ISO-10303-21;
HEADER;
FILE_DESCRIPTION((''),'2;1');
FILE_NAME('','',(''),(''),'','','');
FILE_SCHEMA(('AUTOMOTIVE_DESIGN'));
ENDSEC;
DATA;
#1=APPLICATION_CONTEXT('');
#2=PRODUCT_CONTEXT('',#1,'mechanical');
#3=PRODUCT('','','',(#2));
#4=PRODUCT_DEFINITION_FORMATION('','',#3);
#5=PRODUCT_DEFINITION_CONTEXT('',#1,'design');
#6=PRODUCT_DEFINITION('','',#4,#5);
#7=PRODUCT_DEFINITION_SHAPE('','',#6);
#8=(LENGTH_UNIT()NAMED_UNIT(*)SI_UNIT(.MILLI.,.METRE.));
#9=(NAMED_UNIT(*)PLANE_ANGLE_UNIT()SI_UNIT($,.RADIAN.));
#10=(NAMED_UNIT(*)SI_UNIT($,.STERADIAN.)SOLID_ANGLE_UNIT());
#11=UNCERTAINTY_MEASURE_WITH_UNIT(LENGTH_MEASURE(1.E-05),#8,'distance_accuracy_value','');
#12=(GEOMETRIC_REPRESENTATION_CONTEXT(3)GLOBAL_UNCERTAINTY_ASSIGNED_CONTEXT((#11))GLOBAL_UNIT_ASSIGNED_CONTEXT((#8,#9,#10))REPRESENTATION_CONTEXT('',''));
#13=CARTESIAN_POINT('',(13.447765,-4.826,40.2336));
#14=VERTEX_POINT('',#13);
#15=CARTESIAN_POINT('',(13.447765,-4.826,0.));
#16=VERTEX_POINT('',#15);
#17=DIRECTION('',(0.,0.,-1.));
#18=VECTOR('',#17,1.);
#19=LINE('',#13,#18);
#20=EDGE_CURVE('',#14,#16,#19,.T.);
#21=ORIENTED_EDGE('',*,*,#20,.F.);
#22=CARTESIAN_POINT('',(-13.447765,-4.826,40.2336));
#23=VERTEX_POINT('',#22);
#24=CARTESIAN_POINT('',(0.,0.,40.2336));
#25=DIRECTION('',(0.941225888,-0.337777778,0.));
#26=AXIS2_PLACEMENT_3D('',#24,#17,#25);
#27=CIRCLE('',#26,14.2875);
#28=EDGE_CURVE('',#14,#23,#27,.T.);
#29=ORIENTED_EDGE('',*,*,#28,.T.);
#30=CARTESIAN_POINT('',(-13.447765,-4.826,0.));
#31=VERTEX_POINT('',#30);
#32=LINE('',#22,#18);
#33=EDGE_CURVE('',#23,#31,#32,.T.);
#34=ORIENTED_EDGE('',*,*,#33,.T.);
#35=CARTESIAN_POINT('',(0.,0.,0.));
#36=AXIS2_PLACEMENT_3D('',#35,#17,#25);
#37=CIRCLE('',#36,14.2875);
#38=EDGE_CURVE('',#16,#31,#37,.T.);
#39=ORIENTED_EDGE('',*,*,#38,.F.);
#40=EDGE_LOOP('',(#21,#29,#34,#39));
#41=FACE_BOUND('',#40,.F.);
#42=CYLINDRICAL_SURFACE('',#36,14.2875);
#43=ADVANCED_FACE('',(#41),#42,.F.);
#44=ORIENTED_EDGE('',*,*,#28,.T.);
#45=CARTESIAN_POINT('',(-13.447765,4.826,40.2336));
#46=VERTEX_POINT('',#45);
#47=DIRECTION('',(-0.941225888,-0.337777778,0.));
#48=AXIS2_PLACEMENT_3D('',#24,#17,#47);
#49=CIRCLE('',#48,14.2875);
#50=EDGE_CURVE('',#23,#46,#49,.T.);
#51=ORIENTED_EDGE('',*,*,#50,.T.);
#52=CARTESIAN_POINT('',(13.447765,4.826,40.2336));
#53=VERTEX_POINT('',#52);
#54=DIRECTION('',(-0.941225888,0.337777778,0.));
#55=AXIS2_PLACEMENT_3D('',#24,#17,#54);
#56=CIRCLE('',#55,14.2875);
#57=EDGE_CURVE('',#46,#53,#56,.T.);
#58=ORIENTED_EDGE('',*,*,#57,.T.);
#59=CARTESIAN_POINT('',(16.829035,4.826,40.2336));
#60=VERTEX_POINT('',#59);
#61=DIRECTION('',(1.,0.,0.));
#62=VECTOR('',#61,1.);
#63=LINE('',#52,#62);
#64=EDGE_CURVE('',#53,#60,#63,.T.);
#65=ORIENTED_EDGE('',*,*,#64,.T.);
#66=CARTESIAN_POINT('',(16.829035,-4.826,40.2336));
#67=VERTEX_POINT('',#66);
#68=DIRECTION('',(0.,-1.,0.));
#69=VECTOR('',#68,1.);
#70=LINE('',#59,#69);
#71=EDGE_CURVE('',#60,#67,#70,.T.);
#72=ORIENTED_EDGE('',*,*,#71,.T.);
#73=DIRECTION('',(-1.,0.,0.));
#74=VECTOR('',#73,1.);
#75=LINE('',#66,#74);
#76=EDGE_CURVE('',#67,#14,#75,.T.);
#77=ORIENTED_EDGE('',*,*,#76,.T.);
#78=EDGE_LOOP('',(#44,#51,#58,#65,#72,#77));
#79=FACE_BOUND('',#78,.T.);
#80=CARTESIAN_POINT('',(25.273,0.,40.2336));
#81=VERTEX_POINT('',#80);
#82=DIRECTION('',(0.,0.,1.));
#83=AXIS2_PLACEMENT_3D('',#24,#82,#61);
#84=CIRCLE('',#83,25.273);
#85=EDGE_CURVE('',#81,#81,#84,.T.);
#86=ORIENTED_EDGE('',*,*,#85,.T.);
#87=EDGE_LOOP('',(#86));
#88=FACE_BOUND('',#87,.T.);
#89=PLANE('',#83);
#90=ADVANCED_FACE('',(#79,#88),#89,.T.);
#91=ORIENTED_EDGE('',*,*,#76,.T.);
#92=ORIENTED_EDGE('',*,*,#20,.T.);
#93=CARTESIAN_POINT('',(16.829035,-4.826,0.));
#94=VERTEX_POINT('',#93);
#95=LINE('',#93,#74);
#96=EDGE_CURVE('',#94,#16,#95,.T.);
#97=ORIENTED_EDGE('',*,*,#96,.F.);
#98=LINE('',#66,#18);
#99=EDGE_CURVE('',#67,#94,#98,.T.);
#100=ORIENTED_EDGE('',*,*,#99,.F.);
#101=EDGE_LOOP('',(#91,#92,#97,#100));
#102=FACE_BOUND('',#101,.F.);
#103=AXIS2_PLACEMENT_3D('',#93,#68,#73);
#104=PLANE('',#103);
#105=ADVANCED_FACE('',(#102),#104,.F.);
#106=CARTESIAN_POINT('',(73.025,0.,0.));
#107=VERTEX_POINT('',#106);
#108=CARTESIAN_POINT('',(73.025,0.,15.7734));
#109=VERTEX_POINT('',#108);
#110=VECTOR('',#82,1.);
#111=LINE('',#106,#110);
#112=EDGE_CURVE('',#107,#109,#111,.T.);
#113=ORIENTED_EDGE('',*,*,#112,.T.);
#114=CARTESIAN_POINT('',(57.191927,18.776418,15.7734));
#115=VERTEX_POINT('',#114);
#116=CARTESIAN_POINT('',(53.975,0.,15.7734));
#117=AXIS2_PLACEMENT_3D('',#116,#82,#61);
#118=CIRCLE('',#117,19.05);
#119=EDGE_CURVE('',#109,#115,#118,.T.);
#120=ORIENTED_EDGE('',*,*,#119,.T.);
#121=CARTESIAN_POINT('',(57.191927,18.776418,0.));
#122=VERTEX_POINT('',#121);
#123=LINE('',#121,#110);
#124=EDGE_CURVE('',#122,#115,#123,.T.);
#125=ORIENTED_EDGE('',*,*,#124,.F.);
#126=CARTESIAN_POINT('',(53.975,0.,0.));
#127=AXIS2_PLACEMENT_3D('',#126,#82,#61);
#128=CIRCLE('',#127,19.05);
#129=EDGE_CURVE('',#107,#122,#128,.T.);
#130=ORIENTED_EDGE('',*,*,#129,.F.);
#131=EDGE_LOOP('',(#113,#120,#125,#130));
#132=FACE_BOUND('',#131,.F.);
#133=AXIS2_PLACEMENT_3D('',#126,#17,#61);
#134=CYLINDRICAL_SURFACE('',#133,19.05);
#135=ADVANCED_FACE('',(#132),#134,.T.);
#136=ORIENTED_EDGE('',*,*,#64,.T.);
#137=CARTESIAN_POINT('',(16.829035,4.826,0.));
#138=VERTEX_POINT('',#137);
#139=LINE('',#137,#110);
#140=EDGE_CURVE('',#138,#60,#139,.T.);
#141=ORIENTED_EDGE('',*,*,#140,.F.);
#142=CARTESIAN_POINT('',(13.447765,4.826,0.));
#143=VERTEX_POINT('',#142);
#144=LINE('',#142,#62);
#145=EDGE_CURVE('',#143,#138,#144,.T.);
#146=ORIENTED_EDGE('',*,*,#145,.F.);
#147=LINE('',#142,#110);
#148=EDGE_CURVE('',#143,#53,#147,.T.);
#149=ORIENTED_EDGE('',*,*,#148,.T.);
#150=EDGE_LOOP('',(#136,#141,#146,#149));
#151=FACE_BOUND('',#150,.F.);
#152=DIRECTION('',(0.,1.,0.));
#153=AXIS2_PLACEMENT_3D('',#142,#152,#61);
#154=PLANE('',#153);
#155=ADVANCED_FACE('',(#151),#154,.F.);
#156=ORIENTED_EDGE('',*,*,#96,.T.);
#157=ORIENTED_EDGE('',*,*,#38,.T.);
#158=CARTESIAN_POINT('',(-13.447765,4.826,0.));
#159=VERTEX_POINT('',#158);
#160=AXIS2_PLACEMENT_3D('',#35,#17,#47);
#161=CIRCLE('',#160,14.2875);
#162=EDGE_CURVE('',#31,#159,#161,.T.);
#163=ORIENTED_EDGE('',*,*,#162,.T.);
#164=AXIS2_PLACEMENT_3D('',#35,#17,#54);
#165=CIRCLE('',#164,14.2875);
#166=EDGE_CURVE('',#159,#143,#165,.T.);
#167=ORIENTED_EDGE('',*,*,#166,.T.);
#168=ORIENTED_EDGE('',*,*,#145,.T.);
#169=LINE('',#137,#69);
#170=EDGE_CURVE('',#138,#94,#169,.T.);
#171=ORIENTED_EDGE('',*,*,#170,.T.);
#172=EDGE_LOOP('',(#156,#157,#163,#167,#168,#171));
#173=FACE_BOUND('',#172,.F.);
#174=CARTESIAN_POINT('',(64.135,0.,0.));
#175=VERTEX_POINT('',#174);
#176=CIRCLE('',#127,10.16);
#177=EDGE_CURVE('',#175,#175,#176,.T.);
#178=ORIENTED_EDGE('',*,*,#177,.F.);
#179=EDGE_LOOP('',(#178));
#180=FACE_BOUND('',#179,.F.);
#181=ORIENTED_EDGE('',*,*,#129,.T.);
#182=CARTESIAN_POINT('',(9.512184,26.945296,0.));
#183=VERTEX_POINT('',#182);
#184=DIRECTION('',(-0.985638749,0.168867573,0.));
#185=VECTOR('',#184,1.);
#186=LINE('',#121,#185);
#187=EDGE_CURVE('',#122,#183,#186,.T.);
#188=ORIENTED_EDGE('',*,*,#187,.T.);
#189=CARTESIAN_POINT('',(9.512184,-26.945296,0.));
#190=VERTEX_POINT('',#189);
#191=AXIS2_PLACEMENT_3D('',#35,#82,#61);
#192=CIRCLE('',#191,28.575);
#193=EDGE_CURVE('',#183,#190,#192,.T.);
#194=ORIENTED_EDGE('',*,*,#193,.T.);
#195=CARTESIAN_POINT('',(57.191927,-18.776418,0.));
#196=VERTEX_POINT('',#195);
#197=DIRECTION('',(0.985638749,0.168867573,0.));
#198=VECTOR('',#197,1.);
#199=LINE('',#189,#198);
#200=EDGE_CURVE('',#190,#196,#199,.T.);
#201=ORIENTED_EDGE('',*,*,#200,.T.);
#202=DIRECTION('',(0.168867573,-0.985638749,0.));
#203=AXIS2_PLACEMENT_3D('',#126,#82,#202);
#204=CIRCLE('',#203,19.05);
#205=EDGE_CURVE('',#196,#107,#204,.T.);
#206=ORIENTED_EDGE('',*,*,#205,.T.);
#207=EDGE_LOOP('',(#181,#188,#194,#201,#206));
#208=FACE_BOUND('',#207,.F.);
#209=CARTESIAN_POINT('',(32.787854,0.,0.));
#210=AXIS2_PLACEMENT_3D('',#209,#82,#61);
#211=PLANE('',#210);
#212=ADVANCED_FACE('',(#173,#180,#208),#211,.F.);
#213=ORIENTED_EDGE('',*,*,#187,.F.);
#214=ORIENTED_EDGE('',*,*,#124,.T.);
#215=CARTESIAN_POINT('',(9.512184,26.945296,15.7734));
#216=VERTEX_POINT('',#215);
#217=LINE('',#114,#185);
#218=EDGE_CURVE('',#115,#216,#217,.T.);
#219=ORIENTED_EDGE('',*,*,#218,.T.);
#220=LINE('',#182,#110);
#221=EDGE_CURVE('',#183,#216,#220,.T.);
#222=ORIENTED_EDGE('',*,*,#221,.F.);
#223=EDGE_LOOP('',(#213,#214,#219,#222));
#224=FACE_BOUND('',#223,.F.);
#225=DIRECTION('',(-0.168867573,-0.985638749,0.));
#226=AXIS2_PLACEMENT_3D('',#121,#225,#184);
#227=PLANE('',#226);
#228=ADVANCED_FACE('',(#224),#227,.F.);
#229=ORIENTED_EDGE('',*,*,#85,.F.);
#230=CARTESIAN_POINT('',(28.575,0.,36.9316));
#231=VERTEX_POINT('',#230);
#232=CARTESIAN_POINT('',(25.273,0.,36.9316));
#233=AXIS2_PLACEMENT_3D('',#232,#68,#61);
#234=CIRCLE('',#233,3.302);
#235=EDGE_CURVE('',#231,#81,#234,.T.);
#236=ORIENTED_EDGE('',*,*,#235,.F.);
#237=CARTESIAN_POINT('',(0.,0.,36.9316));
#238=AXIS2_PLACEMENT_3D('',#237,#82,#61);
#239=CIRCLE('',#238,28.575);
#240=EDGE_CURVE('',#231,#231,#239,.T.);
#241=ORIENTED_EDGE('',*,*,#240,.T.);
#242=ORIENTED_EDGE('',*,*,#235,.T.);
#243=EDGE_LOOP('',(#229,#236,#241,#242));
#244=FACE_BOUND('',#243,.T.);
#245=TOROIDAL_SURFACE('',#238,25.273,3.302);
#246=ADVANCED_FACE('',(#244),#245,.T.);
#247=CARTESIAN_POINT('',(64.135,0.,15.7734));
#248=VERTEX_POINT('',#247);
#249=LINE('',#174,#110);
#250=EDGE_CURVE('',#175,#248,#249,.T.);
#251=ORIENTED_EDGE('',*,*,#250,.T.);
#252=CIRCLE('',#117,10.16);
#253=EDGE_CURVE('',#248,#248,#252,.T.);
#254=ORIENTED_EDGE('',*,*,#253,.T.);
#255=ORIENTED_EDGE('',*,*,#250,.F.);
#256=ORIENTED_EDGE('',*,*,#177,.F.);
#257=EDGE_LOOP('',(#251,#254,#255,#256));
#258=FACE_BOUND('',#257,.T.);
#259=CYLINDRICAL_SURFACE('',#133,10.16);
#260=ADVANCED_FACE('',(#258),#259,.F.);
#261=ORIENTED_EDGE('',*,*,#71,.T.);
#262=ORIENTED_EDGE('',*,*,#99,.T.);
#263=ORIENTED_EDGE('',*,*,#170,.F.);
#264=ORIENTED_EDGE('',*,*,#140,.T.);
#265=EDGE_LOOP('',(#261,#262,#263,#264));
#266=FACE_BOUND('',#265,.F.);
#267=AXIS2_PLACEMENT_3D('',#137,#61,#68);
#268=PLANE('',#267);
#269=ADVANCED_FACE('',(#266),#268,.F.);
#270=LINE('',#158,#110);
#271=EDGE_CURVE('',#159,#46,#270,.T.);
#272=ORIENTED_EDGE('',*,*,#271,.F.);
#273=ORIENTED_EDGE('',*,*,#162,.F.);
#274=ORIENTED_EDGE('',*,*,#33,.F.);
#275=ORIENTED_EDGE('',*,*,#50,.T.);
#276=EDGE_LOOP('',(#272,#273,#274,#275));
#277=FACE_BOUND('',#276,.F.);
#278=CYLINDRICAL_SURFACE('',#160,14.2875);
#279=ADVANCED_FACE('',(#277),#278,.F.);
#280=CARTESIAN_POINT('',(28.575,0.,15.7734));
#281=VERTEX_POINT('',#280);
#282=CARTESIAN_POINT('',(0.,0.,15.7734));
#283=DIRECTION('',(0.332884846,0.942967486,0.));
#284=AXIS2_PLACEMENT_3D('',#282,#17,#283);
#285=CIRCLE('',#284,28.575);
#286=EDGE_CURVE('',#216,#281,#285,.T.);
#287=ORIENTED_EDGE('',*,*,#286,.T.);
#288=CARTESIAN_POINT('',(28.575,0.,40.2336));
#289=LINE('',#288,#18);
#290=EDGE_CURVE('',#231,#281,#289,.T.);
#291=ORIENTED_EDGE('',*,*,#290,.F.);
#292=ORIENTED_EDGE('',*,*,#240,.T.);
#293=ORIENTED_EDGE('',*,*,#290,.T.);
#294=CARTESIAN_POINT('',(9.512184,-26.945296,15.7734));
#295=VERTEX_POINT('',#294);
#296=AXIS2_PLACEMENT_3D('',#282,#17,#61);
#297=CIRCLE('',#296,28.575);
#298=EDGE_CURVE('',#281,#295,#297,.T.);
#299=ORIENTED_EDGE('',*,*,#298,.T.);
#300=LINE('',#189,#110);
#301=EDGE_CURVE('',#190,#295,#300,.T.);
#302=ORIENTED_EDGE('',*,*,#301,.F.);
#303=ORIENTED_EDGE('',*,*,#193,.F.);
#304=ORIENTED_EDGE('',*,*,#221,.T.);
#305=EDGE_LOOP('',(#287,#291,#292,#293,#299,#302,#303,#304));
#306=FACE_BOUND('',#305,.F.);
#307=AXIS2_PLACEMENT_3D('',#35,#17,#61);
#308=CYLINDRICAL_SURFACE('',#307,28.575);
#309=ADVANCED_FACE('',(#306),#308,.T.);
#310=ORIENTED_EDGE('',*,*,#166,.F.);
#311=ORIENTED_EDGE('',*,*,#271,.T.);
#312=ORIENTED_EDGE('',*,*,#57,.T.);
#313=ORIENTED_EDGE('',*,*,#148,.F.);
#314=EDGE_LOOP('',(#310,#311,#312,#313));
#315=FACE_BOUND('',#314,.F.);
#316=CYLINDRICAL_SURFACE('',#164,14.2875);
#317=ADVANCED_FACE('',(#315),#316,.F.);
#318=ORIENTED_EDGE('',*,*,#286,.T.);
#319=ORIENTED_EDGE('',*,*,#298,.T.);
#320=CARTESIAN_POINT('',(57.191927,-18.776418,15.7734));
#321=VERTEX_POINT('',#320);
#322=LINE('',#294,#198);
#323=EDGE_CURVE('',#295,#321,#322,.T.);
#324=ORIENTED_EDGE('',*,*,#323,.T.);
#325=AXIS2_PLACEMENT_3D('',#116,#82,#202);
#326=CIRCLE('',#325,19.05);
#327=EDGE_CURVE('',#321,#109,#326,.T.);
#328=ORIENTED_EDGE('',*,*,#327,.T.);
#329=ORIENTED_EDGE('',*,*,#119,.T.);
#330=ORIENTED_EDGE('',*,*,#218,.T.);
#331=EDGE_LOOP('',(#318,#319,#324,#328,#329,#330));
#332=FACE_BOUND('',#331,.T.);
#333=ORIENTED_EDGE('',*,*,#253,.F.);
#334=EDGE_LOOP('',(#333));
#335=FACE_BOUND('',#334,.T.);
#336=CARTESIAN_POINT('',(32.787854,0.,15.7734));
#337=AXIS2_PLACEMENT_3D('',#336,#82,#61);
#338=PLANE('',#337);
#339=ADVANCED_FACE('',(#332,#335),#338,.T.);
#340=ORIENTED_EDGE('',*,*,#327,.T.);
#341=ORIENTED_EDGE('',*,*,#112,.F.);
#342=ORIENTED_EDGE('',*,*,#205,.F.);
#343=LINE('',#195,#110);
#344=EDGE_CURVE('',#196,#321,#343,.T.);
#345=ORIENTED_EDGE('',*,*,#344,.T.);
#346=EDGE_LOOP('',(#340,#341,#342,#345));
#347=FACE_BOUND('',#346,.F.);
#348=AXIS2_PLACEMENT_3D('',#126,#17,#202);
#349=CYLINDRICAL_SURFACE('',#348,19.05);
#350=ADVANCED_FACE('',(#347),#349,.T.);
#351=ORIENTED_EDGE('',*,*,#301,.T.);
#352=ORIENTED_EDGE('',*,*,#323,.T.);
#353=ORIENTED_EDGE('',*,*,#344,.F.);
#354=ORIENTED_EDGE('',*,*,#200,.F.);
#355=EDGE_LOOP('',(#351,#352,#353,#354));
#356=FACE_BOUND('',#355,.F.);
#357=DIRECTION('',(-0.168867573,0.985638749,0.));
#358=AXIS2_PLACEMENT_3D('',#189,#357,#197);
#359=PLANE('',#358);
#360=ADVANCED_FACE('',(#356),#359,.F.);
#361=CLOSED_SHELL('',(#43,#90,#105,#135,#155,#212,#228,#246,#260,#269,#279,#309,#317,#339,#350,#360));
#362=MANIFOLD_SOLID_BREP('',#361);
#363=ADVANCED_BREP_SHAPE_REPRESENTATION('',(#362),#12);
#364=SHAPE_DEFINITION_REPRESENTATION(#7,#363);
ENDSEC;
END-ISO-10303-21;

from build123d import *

# Parameters (mm, degrees)
F0_R     = 28.575
F1_DEPTH = 40.2336
F2_R     = 10.16
F3_DEPTH = 15.7734
F4_DEPTH = 25.4
F5_R     = 3.302


with BuildPart() as f1:
    # F0 (on Top) → F1 (new body)
    with BuildSketch(Plane.XY):
        Circle(F0_R)
        with BuildLine():
            ThreePointArc((-13.4477648793, -4.826), (-14.2875, 0), (-13.4477648793, 4.826))
            ThreePointArc((-13.4477648793, 4.826), (0, 14.2875), (13.4477648793, 4.826))
            Line((13.4477648793, 4.826), (16.8290351207, 4.826))
            Line((16.8290351207, 4.826), (16.8290351207, -4.826))
            Line((16.8290351207, -4.826), (13.4477648793, -4.826))
            ThreePointArc((13.4477648793, -4.826), (0, -14.2875), (-13.4477648793, -4.826))
        make_face(mode=Mode.SUBTRACT)
    extrude(amount=F1_DEPTH)

    # F2 (on Top) → F3 (join)
    with BuildSketch(Plane.XY):
        with BuildLine():
            ThreePointArc((57.1919272622, -18.7764181619), (34.925, 0), (57.1919272622, 18.7764181619))
            Line((57.1919272622, 18.7764181619), (9.5121844836, 26.9452959039))
            ThreePointArc((9.5121844836, 26.9452959039), (23.3274655355, 16.5033322905), (28.575, 0))
            ThreePointArc((28.575, 0), (23.3274655355, -16.5033322905), (9.5121844836, -26.9452959039))
            Line((9.5121844836, -26.9452959039), (57.1919272622, -18.7764181619))
        make_face()
        with BuildLine():
            ThreePointArc((57.1919272622, -18.7764181619), (68.5383952831, -12.2804730295), (73.025, 0))
            ThreePointArc((73.025, 0), (68.5383952831, 12.2804730295), (57.1919272622, 18.7764181619))
            ThreePointArc((57.1919272622, 18.7764181619), (34.925, 0), (57.1919272622, -18.7764181619))
        make_face()
        with Locations((53.975, 0)):
            Circle(F2_R, mode=Mode.SUBTRACT)
    extrude(amount=F3_DEPTH)

    # F0 (on Top) → F4 (join)
    with BuildSketch(Plane.XY):
        Circle(F0_R)
        with BuildLine():
            ThreePointArc((-13.4477648793, -4.826), (-14.2875, 0), (-13.4477648793, 4.826))
            ThreePointArc((-13.4477648793, 4.826), (0, 14.2875), (13.4477648793, 4.826))
            Line((13.4477648793, 4.826), (16.8290351207, 4.826))
            Line((16.8290351207, 4.826), (16.8290351207, -4.826))
            Line((16.8290351207, -4.826), (13.4477648793, -4.826))
            ThreePointArc((13.4477648793, -4.826), (0, -14.2875), (-13.4477648793, -4.826))
        make_face(mode=Mode.SUBTRACT)
    extrude(amount=F4_DEPTH)

    # F5
    f5_edges = [f1.edges().sort_by_distance(p)[0] for p in [
        (-28.575, 0, 40.2336),
    ]]
    fillet(f5_edges, radius=F5_R)


solid = f1.part
